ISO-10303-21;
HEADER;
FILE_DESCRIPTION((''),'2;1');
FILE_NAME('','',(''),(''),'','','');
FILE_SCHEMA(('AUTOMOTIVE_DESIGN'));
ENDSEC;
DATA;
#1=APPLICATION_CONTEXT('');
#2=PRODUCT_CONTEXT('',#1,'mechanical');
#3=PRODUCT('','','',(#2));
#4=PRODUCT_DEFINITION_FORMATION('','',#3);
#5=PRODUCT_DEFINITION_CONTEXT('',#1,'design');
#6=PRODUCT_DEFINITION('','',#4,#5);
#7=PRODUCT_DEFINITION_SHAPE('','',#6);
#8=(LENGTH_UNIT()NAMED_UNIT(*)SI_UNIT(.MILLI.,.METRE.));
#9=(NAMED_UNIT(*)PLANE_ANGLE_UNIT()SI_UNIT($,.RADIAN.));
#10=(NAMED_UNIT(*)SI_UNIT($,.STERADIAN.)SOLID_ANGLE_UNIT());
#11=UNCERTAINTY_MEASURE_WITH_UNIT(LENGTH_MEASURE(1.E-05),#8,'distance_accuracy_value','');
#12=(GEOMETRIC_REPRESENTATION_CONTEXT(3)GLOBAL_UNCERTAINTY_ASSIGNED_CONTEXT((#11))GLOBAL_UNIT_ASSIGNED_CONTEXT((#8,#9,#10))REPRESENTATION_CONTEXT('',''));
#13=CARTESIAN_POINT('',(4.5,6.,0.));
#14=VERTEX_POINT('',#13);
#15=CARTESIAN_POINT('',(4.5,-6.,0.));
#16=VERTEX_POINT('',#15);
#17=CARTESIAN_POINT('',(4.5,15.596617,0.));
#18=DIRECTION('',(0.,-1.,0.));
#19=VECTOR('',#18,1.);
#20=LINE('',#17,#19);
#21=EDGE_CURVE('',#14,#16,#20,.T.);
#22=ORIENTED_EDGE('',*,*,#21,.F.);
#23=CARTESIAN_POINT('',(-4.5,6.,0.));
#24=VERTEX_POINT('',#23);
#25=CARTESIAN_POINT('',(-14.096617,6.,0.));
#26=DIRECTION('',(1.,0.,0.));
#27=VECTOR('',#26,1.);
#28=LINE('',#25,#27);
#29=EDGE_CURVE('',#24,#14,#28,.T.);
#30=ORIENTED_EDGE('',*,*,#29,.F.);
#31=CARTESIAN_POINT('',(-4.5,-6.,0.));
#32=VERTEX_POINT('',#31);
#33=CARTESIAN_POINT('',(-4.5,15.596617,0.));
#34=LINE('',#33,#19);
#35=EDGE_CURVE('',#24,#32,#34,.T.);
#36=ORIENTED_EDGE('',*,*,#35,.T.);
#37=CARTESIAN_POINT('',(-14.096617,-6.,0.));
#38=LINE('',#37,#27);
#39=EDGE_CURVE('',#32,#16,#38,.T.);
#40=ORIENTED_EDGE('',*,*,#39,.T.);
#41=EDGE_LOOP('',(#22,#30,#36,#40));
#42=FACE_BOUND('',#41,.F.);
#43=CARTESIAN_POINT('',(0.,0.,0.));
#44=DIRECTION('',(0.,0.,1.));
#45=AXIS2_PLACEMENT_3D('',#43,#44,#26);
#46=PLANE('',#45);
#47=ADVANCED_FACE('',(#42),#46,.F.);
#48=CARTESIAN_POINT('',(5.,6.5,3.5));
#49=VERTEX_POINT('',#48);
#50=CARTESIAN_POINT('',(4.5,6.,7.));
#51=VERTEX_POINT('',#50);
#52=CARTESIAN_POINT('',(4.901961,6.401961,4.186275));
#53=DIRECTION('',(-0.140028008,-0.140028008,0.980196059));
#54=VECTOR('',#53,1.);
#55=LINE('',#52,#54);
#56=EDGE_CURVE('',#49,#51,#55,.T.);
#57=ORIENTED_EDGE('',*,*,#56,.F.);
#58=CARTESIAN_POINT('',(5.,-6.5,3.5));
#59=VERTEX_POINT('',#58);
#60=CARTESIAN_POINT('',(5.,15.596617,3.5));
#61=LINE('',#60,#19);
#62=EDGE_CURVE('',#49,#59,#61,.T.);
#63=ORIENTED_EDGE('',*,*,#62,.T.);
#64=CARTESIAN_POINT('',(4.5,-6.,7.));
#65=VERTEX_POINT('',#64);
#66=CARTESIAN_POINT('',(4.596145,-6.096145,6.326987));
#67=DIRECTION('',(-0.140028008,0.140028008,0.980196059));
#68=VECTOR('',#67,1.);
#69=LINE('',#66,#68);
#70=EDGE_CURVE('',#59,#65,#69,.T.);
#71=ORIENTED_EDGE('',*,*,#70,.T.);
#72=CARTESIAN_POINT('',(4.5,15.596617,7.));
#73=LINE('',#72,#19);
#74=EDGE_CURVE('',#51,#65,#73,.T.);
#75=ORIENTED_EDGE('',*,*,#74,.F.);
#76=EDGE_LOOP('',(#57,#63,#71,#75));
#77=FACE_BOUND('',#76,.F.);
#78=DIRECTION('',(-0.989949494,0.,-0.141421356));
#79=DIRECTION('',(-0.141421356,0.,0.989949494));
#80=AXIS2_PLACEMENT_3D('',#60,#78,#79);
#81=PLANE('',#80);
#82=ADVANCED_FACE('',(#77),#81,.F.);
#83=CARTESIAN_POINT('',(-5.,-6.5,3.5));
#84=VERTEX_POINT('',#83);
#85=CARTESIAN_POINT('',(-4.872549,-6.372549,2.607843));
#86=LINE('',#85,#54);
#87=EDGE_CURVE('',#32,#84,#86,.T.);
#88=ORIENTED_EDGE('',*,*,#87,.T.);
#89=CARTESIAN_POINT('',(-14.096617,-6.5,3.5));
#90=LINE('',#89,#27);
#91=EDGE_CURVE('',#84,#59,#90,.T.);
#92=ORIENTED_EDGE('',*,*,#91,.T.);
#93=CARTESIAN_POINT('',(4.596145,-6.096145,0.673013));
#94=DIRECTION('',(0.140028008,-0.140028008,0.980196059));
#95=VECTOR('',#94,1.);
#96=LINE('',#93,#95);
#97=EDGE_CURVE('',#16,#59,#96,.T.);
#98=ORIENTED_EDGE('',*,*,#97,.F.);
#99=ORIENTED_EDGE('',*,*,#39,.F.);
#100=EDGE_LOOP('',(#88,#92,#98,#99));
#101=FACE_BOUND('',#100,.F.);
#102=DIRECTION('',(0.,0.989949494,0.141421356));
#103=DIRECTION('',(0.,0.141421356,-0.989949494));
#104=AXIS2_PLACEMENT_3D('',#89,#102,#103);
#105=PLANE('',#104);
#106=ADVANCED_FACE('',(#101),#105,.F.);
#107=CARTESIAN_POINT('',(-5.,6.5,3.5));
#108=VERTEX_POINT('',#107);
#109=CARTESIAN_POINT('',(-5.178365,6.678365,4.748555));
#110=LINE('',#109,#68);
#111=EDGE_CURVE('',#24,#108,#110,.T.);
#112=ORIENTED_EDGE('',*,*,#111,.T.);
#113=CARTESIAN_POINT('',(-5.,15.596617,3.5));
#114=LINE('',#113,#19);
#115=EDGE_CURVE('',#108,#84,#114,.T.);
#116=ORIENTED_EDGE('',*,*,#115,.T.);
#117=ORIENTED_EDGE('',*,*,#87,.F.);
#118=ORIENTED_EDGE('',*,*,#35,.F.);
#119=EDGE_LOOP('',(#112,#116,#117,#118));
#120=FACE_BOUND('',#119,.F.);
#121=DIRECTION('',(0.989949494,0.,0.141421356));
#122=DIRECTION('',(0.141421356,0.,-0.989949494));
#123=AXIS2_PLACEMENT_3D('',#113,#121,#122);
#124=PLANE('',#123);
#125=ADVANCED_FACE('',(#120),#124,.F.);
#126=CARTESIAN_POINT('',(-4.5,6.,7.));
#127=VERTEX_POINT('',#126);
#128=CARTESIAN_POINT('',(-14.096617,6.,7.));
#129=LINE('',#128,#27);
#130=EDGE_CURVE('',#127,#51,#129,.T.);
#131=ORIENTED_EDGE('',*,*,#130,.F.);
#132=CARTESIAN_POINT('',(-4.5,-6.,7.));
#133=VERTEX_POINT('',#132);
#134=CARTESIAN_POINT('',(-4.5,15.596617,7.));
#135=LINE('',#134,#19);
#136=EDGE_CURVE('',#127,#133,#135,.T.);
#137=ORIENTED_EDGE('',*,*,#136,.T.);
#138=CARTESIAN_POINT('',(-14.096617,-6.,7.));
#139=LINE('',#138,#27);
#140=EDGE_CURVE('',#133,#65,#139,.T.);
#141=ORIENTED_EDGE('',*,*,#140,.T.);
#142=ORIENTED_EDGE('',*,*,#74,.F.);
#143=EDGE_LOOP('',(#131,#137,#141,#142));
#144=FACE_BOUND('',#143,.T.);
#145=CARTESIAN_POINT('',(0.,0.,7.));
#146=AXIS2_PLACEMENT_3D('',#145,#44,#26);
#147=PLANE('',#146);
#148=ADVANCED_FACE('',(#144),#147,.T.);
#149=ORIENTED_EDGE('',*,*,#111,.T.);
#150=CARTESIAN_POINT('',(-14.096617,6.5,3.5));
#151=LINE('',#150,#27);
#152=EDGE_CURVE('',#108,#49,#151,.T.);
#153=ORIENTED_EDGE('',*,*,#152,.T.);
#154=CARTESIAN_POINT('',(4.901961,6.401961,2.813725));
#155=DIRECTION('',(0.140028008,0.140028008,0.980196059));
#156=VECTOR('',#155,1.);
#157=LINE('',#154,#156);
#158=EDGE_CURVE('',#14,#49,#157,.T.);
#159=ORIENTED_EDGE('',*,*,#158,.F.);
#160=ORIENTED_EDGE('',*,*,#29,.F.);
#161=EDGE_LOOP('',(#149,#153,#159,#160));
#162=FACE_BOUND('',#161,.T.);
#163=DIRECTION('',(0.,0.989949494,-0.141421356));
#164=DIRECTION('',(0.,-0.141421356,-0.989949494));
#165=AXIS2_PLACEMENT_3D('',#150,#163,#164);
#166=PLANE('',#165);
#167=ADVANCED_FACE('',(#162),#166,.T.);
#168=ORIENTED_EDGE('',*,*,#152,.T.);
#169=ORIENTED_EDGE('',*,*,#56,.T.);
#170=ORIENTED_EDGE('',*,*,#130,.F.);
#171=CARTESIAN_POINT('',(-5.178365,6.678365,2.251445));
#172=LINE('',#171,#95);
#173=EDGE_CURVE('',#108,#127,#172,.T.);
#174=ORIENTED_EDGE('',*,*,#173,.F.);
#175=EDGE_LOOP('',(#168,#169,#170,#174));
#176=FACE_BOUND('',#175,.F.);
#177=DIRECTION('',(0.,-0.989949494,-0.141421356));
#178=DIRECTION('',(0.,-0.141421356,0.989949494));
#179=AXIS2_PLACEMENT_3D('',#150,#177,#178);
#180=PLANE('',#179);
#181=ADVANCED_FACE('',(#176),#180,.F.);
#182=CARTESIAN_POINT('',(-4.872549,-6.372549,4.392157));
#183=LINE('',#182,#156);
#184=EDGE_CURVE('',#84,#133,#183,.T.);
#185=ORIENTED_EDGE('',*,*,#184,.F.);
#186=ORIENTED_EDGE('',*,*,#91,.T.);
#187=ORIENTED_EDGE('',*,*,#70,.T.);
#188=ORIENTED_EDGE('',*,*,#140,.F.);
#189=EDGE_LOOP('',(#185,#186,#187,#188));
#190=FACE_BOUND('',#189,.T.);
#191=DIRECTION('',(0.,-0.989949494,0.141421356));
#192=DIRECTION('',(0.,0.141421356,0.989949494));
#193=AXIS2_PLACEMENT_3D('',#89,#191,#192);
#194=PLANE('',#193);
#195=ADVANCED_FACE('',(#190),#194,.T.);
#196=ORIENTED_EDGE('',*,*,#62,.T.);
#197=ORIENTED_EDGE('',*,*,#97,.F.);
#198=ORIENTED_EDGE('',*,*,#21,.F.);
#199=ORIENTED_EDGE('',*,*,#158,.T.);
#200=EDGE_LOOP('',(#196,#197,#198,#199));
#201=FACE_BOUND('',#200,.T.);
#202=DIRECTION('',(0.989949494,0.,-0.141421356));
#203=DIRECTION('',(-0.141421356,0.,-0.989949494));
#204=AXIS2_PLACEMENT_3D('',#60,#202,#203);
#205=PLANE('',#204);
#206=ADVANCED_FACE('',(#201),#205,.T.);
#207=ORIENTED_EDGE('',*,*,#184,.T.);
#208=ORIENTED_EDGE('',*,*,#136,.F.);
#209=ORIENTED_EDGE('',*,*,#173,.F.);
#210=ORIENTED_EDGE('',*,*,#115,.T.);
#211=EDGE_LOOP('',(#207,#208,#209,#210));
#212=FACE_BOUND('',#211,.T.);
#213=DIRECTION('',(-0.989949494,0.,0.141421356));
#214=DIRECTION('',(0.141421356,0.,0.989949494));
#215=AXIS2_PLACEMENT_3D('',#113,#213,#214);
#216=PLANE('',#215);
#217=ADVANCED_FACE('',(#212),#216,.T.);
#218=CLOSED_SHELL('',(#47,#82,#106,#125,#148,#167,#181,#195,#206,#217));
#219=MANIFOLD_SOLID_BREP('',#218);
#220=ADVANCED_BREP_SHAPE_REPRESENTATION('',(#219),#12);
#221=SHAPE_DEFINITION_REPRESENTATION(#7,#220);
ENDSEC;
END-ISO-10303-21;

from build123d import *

# Parameters (mm, degrees)
F0_W        = 10
F0_H        = 13
F1_DEPTH    = 7
F2_T1_DEPTH = 31.1932339785
F2_T3_DEPTH = 28.1932339785


# Not quite as in the source:
# - a fillet or chamfer that OpenCascade refuses, or shapes differently, is made with other operations: its cross-section is extruded or revolved along the edge and cut away or added
# - a feature of the source that left no trace in its solid (it failed there, or was rolled back) is left out


with BuildPart() as f1:
    # F0 (on Top) → F1 (new body)
    with BuildSketch(Plane.XY):
        Rectangle(F0_W, F0_H)
    extrude(amount=F1_DEPTH)

    # F2: chamfer of 0.5 x 3.5 on 8 edges, made by hand

    # F2_s2 → F2_t1 (cut)
    with BuildSketch(Plane.XZ.offset(-15.5966169892)):
        Polygon((-5, 3.5), (-4.5, 7), (-5, 7), align=None)
        Polygon((5, 3.5), (4.5, 7), (5, 7), align=None)
        Polygon((-5, 3.5), (-4.5, 0), (-5, 0), align=None)
        Polygon((5, 3.5), (4.5, 0), (5, 0), align=None)
    extrude(amount=F2_T1_DEPTH, mode=Mode.SUBTRACT)

    # F2_s4 → F2_t3 (cut)
    with BuildSketch(Plane.YZ.offset(-14.0966169892)):
        Polygon((-6.5, 3.5), (-6, 7), (-6.5, 7), align=None)
        Polygon((6.5, 3.5), (6, 7), (6.5, 7), align=None)
        Polygon((-6.5, 3.5), (-6, 0), (-6.5, 0), align=None)
        Polygon((6.5, 3.5), (6, 0), (6.5, 0), align=None)
    extrude(amount=F2_T3_DEPTH, mode=Mode.SUBTRACT)


solid = f1.part
